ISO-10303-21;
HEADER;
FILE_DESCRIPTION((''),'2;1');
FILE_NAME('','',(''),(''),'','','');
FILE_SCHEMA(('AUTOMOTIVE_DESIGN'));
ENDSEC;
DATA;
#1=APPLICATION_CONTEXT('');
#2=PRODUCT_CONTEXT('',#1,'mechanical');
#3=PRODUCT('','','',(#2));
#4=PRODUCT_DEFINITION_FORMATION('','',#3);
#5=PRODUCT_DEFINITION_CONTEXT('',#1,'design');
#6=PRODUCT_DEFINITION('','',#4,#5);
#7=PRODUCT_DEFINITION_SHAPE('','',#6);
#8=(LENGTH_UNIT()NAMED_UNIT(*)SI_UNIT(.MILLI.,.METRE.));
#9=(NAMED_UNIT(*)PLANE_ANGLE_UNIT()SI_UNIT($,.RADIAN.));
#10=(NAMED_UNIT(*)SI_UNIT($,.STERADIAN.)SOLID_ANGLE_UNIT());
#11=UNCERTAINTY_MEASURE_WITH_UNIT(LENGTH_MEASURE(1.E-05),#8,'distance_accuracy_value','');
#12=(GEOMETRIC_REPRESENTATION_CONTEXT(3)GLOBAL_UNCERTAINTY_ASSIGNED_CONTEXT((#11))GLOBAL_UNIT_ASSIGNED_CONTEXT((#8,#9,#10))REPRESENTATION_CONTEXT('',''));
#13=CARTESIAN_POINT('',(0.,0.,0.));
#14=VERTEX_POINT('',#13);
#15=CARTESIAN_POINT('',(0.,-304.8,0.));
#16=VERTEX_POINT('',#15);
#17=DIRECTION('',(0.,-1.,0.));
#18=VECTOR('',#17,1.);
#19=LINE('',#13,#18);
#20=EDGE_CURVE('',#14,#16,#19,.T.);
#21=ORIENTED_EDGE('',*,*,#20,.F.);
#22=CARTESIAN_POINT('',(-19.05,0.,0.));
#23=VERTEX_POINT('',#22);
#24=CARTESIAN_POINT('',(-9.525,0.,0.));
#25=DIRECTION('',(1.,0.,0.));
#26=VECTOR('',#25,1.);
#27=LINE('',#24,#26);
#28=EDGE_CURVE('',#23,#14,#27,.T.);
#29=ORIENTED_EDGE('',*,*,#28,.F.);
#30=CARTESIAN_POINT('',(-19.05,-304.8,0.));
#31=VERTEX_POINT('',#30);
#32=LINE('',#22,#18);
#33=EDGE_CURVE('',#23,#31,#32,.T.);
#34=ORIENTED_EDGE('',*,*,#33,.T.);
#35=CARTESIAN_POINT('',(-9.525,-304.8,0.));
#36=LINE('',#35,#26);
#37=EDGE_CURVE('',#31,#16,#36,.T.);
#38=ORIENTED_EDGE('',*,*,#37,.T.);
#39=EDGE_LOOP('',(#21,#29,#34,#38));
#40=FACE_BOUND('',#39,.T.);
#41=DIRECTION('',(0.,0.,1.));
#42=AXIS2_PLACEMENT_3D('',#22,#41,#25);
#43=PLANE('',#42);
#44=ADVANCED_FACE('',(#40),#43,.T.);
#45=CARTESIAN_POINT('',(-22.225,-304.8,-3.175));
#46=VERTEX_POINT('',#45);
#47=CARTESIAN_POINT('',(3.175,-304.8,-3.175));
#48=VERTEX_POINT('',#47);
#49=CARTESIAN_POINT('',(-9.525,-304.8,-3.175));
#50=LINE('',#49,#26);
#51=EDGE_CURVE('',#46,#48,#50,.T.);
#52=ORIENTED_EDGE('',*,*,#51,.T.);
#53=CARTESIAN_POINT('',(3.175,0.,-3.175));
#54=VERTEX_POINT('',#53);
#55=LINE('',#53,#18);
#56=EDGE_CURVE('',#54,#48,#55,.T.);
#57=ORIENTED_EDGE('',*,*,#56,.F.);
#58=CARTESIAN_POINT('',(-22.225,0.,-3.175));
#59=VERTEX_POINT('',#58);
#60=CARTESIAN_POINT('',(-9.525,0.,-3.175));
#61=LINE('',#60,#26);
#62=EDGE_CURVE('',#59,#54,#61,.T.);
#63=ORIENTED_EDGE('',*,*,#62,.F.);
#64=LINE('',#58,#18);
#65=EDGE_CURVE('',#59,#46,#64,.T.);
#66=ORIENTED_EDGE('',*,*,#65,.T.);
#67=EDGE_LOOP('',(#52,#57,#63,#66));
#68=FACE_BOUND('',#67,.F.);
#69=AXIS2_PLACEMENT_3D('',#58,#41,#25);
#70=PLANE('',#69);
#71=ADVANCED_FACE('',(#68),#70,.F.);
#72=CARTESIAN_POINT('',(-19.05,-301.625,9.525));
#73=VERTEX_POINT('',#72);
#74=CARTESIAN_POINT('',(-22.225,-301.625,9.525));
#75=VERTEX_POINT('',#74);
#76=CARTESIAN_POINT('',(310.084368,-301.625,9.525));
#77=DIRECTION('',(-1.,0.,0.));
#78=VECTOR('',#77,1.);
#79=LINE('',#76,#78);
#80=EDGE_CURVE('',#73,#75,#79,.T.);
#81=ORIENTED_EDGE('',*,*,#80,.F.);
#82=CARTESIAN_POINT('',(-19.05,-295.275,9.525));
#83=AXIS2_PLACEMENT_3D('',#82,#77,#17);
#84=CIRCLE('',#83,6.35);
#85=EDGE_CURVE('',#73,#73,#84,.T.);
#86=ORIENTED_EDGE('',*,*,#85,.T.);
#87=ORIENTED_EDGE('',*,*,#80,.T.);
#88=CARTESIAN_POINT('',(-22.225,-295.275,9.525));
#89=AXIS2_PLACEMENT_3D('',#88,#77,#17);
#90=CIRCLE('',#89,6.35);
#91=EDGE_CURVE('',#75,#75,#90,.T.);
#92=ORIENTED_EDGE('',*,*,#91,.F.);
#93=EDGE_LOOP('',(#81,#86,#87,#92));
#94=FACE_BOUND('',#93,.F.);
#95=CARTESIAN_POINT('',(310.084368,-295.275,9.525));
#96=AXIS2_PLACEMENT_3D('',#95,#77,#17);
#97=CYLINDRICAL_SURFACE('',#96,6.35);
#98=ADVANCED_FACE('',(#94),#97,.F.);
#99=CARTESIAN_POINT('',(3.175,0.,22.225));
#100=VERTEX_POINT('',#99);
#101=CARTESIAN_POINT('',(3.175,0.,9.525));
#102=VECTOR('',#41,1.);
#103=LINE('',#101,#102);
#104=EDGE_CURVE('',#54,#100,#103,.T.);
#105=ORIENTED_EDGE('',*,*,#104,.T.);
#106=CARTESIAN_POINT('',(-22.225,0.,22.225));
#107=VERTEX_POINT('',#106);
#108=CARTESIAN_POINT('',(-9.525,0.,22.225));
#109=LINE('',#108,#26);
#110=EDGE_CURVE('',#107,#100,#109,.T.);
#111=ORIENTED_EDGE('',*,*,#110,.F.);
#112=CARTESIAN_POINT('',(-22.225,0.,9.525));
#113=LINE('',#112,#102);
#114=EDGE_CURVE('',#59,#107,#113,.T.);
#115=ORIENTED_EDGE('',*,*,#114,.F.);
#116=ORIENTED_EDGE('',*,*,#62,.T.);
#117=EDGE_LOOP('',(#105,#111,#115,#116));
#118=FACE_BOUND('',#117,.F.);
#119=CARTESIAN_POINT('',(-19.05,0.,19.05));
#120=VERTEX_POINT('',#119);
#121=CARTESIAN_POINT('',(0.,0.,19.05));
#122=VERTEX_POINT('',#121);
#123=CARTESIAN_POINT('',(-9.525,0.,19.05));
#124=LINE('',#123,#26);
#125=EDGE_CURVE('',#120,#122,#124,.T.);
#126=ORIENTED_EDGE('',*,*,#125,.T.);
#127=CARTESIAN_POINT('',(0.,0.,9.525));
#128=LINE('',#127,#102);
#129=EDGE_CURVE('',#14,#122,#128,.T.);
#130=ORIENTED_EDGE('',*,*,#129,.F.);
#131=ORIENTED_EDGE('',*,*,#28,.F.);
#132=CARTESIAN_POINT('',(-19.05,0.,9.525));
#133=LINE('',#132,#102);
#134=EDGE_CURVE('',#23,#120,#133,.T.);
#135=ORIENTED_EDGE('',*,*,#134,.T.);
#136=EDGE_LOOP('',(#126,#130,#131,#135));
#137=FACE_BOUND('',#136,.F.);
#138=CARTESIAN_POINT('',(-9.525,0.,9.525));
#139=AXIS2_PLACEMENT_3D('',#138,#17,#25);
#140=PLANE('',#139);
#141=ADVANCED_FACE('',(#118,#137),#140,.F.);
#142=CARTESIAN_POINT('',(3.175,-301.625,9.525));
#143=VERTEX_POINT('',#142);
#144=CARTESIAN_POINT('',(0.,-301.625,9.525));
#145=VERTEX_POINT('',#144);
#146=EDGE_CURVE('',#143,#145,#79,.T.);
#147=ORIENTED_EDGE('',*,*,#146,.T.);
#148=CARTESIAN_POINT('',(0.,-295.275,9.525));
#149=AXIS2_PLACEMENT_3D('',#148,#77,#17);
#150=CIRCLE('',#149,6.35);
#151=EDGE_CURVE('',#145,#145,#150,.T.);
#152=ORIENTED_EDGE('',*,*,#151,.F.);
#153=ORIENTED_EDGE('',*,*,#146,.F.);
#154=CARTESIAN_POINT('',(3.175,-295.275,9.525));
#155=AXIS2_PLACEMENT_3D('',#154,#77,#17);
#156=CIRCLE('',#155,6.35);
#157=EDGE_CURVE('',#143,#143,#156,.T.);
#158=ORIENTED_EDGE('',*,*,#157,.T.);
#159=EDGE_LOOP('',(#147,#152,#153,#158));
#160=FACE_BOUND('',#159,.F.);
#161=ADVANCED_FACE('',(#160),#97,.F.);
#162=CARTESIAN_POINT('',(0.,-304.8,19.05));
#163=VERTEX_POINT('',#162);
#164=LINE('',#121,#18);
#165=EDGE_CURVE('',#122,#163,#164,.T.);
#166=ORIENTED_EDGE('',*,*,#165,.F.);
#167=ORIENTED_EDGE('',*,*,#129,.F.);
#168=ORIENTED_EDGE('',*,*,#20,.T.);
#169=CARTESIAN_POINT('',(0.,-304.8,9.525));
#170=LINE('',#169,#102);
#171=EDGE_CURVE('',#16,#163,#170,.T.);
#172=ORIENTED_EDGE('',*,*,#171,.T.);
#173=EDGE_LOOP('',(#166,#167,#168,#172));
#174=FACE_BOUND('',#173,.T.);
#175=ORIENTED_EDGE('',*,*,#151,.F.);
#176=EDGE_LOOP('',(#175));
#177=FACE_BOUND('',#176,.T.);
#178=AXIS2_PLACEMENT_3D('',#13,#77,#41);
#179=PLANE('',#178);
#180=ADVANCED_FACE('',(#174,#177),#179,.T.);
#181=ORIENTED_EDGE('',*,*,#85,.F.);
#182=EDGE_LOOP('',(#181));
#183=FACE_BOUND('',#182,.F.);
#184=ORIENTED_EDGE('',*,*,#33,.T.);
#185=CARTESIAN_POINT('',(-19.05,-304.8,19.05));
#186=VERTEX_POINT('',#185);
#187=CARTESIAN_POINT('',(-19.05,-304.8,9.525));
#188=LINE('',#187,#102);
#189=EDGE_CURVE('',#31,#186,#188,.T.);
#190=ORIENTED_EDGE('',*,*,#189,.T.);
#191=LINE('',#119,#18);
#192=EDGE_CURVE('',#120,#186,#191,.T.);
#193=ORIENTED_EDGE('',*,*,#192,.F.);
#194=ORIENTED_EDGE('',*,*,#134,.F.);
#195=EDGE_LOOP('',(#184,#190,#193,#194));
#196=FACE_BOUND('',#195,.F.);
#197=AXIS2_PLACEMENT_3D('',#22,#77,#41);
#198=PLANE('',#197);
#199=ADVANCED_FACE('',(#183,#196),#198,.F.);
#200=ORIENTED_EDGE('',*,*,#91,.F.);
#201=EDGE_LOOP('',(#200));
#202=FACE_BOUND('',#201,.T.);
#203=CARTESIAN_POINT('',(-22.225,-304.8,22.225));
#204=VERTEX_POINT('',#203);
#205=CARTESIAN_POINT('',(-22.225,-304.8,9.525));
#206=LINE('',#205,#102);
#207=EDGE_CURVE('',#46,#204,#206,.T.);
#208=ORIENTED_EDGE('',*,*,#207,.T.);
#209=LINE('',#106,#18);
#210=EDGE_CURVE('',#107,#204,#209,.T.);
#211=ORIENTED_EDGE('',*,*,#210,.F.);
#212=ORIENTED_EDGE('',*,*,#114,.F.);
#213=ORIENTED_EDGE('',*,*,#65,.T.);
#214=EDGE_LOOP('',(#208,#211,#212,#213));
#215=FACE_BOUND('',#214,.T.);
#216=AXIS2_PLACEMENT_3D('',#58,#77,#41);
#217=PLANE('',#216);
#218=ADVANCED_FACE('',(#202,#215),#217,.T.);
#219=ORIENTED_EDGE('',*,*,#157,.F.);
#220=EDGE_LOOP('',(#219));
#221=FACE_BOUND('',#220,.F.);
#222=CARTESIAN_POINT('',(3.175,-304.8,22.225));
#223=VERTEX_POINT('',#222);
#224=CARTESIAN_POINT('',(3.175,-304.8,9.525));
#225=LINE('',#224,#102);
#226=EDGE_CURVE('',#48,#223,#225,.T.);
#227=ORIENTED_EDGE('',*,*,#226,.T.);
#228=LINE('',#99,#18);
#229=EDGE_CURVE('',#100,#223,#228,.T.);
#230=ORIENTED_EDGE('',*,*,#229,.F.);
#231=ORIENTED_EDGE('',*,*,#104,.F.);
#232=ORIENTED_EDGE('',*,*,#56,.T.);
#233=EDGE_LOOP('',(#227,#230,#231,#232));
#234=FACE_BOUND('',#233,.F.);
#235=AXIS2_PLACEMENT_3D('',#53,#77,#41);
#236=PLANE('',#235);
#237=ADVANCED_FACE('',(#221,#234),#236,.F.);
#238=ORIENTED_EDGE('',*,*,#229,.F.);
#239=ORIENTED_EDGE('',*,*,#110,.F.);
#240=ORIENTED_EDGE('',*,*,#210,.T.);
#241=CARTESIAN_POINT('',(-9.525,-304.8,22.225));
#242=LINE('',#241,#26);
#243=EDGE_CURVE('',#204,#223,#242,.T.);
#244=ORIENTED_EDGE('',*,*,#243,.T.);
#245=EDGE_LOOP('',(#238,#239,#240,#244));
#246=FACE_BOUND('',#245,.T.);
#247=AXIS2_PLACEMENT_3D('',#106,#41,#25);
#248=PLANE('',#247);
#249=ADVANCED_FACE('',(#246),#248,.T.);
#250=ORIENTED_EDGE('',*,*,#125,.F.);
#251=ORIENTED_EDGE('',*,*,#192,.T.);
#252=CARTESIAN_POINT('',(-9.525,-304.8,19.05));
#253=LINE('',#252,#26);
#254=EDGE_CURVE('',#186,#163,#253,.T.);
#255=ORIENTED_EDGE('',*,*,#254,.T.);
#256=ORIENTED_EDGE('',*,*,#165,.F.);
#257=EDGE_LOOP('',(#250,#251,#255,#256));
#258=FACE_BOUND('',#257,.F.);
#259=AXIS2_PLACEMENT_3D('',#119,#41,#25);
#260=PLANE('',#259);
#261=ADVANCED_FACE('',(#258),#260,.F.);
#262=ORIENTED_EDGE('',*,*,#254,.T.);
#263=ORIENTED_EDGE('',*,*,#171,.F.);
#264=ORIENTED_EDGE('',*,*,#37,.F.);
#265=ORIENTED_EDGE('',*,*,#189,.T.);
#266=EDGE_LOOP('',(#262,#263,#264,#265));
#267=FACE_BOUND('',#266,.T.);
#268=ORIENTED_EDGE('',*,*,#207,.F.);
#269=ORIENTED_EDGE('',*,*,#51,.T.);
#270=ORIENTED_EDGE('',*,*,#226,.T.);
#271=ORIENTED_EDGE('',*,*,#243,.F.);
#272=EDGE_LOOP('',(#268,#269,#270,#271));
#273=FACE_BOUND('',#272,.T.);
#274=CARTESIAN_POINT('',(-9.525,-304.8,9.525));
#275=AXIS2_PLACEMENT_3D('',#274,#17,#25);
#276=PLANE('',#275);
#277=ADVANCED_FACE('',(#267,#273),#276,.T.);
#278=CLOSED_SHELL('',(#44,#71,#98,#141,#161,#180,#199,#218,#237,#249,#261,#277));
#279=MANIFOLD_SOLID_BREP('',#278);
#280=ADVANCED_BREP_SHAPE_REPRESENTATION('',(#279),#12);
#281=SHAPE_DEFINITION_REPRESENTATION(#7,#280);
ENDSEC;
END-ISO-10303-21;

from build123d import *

# Parameters (mm, degrees)
F0_W     = 25.4
F0_H     = 25.4
F0_W_2   = 19.05
F0_H_2   = 19.05
F1_DEPTH = 304.8
F3_D     = 12.7


# Not quite as in the source:
# - a feature names something its author has since deleted; it is built from what else it names


with BuildPart() as f1:
    # F0 (on Front) → F1 (new body)
    with BuildSketch(Plane.XZ):
        with Locations((-9.525, 9.525)):
            Rectangle(F0_W, F0_H)
        with Locations((-9.525, 9.525)):
            Rectangle(F0_W_2, F0_H_2, mode=Mode.SUBTRACT)
    extrude(amount=F1_DEPTH)

    # F3 (through all)
    with Locations(Plane.YZ.offset(3.175)):
        with Locations((-295.275, 9.525)):
            Hole(F3_D / 2)


solid = f1.part
